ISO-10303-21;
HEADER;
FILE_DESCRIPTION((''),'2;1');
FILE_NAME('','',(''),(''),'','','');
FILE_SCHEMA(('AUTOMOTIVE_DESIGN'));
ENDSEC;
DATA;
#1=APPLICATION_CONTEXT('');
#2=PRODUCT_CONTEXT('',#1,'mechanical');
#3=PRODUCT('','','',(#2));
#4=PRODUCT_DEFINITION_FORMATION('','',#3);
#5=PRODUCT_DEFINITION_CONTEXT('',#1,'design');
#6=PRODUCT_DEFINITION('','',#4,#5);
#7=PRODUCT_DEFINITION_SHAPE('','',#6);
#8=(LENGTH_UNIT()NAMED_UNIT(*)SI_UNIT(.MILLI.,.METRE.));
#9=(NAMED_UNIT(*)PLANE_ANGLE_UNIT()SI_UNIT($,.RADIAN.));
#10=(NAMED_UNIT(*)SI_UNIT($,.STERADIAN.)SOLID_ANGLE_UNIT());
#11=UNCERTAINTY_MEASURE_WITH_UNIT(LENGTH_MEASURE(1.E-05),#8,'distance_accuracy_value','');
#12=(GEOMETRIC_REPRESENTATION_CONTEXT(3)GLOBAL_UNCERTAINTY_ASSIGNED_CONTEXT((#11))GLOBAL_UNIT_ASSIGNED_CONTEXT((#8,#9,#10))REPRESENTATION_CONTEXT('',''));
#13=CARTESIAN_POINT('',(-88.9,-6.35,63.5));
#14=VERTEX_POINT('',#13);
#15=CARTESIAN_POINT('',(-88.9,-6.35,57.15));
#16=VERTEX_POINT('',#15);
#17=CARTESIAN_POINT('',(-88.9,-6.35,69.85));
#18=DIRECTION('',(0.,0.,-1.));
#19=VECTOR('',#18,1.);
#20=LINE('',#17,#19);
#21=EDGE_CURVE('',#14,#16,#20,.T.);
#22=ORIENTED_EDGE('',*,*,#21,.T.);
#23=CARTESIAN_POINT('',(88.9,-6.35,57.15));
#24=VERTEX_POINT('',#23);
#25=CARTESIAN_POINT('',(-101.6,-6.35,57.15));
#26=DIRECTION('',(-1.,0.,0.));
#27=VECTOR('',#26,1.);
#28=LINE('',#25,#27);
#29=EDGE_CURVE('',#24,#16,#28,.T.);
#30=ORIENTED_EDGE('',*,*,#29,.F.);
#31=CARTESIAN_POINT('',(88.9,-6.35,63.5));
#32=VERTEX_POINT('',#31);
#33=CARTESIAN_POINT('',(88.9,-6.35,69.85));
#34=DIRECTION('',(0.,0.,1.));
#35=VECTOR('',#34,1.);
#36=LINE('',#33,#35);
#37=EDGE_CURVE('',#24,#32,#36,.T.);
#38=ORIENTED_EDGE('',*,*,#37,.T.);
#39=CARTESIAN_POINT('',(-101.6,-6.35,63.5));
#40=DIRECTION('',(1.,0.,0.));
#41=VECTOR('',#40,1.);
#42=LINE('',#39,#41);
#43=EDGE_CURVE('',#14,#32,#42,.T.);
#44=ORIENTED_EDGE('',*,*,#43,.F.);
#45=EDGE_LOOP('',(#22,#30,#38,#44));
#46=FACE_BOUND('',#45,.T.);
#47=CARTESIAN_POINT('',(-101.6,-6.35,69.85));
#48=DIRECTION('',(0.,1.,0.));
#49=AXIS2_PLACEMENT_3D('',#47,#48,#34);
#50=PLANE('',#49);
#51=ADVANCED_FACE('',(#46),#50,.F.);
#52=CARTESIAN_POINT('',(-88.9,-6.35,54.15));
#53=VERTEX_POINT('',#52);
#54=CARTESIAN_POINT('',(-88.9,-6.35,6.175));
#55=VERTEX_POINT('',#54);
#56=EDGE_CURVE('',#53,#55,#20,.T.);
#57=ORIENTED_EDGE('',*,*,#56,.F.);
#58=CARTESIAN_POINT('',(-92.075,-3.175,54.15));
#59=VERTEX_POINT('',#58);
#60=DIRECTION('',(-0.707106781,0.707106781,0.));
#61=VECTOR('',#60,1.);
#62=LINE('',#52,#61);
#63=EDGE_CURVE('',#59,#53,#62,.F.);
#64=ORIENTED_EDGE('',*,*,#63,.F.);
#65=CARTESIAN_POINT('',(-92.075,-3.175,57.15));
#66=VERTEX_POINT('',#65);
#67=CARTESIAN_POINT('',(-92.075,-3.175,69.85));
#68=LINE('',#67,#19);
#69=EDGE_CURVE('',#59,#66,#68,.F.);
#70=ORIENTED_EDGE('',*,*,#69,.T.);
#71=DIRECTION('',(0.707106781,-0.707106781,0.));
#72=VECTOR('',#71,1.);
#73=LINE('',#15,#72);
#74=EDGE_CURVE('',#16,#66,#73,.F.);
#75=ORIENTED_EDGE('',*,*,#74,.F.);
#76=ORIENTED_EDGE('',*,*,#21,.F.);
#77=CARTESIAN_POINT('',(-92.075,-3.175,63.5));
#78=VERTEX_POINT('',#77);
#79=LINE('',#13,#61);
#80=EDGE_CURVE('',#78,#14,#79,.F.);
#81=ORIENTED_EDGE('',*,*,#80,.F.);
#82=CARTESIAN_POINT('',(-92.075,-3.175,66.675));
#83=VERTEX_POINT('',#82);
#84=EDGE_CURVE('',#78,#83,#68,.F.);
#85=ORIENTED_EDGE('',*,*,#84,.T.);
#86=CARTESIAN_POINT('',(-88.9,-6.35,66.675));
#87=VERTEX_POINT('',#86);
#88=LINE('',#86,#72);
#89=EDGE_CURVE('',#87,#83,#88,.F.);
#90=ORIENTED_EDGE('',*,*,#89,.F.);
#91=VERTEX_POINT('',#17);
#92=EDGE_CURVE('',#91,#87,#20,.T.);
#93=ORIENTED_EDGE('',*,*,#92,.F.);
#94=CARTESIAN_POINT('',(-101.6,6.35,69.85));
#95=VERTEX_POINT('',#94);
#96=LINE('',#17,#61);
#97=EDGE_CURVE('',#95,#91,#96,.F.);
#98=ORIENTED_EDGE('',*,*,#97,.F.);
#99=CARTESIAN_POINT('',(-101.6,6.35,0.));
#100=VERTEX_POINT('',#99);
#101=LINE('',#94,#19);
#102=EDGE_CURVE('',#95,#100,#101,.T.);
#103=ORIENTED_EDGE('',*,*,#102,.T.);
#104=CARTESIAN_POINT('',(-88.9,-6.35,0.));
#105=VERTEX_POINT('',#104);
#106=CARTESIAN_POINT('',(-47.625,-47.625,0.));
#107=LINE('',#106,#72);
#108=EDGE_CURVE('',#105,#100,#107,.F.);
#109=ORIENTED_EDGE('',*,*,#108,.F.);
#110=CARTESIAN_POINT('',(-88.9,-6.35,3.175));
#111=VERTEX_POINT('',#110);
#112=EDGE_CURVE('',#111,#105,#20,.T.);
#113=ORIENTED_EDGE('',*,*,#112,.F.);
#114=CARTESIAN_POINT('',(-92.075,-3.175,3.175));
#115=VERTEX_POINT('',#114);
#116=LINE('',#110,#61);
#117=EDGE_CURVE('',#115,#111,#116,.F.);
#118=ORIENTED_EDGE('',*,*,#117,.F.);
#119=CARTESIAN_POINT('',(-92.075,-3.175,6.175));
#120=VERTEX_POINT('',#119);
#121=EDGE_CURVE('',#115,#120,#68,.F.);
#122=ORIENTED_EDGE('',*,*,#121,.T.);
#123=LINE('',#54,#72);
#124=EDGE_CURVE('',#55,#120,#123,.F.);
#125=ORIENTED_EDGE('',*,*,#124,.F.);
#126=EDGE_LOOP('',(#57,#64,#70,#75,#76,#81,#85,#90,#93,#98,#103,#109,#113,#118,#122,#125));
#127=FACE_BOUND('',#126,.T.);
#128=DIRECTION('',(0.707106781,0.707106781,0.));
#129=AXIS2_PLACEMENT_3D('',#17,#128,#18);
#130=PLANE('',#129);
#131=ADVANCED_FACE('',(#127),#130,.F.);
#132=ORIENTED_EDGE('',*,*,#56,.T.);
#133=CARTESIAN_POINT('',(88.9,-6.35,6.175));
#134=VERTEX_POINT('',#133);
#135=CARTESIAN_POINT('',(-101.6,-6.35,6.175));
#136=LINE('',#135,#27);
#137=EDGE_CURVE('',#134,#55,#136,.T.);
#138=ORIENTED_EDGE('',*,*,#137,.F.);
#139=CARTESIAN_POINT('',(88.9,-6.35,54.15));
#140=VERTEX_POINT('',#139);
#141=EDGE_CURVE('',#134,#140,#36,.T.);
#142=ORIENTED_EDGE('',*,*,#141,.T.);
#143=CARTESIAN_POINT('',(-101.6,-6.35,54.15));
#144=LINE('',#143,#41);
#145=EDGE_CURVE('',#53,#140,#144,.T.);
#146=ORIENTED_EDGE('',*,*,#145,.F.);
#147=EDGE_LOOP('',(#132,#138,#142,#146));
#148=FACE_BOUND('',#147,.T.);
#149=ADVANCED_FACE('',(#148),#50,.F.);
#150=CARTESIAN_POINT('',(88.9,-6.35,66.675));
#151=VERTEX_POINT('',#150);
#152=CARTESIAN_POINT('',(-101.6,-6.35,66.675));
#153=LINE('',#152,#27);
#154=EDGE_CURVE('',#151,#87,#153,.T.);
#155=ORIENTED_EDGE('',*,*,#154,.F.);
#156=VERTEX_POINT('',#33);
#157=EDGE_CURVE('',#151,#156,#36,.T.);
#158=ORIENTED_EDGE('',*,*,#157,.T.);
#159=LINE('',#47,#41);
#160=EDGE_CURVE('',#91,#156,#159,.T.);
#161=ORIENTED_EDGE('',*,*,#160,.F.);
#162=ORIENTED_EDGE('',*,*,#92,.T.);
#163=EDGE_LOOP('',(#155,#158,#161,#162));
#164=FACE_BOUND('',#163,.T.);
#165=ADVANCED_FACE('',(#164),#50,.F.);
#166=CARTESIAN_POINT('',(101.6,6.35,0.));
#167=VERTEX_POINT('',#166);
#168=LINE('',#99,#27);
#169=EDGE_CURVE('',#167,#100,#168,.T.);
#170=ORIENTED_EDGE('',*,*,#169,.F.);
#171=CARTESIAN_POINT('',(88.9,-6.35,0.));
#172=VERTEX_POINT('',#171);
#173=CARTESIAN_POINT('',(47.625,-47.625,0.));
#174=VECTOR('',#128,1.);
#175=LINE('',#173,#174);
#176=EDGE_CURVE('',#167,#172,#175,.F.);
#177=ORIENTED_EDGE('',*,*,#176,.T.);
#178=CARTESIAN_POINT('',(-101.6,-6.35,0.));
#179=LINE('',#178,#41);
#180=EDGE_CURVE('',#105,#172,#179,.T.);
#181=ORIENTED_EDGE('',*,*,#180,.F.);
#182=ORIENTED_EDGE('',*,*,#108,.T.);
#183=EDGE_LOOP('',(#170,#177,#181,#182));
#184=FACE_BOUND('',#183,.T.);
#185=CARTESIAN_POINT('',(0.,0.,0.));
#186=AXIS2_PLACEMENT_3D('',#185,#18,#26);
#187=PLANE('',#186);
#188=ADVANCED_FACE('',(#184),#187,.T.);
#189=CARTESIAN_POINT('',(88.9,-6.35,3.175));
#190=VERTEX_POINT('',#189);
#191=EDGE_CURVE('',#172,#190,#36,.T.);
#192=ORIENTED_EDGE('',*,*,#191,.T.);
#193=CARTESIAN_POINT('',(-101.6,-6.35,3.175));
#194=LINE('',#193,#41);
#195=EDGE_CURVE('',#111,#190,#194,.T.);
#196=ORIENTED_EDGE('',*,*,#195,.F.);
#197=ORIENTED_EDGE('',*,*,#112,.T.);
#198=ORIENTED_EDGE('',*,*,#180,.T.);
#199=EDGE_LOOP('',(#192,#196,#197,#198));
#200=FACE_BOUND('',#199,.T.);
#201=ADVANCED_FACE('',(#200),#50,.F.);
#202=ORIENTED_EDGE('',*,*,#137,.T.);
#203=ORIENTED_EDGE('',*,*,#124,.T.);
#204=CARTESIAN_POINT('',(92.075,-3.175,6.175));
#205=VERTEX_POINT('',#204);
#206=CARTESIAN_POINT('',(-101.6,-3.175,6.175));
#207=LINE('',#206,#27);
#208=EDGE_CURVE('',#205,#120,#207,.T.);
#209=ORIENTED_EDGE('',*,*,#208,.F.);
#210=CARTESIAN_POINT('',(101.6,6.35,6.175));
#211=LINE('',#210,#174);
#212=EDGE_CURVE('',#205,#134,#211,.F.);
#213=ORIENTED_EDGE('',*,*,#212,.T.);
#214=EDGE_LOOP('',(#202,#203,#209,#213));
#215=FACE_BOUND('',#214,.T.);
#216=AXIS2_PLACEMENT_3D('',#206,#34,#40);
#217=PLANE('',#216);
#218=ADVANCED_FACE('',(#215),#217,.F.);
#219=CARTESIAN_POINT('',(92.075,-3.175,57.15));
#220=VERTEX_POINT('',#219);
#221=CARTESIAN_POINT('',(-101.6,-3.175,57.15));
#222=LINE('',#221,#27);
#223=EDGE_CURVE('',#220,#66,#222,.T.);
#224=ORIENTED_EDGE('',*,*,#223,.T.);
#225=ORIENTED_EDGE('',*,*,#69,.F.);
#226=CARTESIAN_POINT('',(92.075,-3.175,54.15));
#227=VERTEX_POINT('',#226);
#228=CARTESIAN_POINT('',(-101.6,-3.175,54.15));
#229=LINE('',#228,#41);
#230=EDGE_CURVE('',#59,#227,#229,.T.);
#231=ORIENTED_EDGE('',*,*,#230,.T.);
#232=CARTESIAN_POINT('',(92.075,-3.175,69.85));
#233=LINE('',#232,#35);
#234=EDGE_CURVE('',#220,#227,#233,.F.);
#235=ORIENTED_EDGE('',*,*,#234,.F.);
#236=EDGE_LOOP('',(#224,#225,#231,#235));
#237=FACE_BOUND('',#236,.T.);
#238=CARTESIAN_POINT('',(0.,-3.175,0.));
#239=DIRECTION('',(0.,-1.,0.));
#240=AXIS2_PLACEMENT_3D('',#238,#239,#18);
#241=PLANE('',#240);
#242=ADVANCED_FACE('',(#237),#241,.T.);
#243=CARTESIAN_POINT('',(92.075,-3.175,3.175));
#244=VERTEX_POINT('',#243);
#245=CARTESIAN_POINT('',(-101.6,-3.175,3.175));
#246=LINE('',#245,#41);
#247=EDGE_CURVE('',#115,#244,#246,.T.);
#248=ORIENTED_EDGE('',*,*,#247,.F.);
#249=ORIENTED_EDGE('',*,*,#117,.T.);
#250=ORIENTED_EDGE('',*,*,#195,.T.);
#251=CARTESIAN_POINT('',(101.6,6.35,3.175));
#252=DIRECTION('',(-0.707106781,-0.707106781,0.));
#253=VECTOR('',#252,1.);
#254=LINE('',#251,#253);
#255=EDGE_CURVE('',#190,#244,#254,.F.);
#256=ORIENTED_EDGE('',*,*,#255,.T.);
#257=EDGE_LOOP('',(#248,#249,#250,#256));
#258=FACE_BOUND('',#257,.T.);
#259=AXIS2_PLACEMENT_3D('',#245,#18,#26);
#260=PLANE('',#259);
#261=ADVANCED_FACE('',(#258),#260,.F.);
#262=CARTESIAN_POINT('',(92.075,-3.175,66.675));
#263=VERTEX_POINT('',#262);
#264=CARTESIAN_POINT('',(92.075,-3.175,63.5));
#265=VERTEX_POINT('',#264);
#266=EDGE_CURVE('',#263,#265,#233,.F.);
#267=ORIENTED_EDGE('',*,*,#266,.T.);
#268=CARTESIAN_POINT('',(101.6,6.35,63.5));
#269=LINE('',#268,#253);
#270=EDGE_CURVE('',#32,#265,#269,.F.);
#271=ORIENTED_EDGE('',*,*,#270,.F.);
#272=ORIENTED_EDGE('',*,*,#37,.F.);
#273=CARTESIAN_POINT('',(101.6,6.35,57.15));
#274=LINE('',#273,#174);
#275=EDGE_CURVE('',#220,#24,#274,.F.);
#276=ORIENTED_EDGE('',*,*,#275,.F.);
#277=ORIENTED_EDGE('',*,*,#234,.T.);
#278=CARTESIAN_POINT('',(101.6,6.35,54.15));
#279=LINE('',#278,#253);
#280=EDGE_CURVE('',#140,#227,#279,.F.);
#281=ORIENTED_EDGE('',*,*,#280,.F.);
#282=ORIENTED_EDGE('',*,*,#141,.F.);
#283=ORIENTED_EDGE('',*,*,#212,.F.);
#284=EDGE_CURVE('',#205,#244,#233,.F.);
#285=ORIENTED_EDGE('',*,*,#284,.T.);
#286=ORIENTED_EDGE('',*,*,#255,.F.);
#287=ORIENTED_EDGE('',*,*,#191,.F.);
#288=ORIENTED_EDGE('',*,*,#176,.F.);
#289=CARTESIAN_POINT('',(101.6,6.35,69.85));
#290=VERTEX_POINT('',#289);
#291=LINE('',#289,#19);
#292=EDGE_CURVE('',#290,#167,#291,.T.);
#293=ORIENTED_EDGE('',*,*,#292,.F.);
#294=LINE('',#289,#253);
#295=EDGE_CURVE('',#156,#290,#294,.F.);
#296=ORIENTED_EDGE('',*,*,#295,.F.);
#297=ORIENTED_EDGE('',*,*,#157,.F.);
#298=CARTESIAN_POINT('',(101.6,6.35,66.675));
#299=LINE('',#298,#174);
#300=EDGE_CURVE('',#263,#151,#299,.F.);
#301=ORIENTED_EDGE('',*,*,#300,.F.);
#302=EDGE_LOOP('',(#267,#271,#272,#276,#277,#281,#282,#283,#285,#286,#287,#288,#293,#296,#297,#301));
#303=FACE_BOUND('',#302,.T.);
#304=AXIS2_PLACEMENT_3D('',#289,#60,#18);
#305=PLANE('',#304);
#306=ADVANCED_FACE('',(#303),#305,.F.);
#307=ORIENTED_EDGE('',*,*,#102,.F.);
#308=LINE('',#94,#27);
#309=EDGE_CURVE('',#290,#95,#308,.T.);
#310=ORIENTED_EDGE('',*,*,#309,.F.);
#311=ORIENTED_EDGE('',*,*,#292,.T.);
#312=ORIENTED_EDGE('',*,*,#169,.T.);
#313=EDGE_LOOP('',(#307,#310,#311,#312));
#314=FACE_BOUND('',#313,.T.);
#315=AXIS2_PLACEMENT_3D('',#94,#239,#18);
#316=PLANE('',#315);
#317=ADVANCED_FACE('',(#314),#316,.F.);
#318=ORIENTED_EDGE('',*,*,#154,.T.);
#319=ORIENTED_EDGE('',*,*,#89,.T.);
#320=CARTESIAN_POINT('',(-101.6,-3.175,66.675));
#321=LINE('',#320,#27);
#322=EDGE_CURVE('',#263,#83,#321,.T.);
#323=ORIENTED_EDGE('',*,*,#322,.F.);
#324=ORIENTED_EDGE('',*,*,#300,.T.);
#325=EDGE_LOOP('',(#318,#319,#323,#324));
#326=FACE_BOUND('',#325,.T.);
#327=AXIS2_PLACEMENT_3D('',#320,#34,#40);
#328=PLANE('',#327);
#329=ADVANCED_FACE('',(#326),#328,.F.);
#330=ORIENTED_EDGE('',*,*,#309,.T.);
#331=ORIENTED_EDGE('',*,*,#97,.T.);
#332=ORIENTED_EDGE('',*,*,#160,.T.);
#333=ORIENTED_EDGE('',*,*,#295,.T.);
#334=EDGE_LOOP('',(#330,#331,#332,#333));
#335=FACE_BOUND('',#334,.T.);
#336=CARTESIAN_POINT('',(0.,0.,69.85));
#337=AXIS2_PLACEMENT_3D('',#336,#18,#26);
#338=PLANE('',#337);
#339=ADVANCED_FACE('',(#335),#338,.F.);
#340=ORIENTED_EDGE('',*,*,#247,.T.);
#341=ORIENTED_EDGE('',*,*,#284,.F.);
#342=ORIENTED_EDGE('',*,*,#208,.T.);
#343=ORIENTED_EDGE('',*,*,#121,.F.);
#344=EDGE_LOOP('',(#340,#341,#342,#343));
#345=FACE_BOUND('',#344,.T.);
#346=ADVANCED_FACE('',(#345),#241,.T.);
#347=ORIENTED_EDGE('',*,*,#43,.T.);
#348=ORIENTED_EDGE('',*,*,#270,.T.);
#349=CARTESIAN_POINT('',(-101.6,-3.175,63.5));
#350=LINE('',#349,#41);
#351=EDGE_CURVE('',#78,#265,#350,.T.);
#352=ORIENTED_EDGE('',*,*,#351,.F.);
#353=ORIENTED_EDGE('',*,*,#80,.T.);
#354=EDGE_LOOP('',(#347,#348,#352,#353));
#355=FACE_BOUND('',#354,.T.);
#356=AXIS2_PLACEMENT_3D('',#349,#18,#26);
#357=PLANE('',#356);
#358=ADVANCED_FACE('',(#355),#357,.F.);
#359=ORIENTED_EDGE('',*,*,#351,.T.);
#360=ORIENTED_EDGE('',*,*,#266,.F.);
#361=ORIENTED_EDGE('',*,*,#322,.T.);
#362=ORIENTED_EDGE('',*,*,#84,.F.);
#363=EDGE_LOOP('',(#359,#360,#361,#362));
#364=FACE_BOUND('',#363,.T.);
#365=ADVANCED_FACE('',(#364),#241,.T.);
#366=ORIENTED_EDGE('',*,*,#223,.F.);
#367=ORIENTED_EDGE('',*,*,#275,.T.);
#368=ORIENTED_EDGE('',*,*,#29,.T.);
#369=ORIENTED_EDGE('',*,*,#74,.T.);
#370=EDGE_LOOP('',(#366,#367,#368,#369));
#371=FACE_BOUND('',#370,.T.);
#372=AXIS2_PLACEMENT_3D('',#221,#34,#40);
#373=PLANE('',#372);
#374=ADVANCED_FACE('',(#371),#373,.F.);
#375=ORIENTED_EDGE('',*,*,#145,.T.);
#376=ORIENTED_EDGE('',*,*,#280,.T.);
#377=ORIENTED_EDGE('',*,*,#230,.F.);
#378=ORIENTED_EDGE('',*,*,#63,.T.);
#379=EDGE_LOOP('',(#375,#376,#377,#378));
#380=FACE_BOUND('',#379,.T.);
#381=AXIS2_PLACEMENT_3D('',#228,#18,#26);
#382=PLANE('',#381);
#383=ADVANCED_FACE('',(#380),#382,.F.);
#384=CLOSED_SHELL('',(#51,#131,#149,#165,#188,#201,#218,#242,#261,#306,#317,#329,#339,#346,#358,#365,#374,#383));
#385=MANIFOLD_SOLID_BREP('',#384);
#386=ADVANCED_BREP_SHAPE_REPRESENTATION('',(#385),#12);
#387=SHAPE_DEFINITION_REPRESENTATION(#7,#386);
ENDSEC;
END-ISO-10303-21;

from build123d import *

# Parameters (mm, degrees)
SKETCH2_W           = 203.2
SKETCH2_H           = 12.7
BOSS_EXTRUDE1_DEPTH = 69.85
CHAMFER1_SIZE       = 12.7
SKETCH3_W           = 203.2
SKETCH3_H           = 3.175
SKETCH3_H_2         = 3.000000096
CUT_EXTRUDE2_DEPTH  = 3.175


with BuildPart() as part:
    # Sketch2 → Boss-Extrude1 (new body)
    with BuildSketch(Plane.XY):
        Rectangle(SKETCH2_W, SKETCH2_H)
    extrude(amount=BOSS_EXTRUDE1_DEPTH)

    # Chamfer1
    chamfer1_edges = [part.edges().sort_by_distance(p)[0] for p in [
        (-101.6, -6.35, 34.925),
        (101.6, -6.35, 34.925),
    ]]
    chamfer(chamfer1_edges, length=CHAMFER1_SIZE - 0.0001)  # a hair under: the kernel refuses the full size

    # Sketch3 → Cut-Extrude2 (cut)
    with BuildSketch(Plane.XZ.offset(6.35)):
        with Locations((0, 65.0875)):
            Rectangle(SKETCH3_W, SKETCH3_H)
        with Locations((0, 4.675000048)):
            Rectangle(SKETCH3_W, SKETCH3_H_2)
        with Locations((0, 55.649999952)):
            Rectangle(SKETCH3_W, SKETCH3_H_2)
    extrude(amount=-CUT_EXTRUDE2_DEPTH, mode=Mode.SUBTRACT)


solid = part.part
